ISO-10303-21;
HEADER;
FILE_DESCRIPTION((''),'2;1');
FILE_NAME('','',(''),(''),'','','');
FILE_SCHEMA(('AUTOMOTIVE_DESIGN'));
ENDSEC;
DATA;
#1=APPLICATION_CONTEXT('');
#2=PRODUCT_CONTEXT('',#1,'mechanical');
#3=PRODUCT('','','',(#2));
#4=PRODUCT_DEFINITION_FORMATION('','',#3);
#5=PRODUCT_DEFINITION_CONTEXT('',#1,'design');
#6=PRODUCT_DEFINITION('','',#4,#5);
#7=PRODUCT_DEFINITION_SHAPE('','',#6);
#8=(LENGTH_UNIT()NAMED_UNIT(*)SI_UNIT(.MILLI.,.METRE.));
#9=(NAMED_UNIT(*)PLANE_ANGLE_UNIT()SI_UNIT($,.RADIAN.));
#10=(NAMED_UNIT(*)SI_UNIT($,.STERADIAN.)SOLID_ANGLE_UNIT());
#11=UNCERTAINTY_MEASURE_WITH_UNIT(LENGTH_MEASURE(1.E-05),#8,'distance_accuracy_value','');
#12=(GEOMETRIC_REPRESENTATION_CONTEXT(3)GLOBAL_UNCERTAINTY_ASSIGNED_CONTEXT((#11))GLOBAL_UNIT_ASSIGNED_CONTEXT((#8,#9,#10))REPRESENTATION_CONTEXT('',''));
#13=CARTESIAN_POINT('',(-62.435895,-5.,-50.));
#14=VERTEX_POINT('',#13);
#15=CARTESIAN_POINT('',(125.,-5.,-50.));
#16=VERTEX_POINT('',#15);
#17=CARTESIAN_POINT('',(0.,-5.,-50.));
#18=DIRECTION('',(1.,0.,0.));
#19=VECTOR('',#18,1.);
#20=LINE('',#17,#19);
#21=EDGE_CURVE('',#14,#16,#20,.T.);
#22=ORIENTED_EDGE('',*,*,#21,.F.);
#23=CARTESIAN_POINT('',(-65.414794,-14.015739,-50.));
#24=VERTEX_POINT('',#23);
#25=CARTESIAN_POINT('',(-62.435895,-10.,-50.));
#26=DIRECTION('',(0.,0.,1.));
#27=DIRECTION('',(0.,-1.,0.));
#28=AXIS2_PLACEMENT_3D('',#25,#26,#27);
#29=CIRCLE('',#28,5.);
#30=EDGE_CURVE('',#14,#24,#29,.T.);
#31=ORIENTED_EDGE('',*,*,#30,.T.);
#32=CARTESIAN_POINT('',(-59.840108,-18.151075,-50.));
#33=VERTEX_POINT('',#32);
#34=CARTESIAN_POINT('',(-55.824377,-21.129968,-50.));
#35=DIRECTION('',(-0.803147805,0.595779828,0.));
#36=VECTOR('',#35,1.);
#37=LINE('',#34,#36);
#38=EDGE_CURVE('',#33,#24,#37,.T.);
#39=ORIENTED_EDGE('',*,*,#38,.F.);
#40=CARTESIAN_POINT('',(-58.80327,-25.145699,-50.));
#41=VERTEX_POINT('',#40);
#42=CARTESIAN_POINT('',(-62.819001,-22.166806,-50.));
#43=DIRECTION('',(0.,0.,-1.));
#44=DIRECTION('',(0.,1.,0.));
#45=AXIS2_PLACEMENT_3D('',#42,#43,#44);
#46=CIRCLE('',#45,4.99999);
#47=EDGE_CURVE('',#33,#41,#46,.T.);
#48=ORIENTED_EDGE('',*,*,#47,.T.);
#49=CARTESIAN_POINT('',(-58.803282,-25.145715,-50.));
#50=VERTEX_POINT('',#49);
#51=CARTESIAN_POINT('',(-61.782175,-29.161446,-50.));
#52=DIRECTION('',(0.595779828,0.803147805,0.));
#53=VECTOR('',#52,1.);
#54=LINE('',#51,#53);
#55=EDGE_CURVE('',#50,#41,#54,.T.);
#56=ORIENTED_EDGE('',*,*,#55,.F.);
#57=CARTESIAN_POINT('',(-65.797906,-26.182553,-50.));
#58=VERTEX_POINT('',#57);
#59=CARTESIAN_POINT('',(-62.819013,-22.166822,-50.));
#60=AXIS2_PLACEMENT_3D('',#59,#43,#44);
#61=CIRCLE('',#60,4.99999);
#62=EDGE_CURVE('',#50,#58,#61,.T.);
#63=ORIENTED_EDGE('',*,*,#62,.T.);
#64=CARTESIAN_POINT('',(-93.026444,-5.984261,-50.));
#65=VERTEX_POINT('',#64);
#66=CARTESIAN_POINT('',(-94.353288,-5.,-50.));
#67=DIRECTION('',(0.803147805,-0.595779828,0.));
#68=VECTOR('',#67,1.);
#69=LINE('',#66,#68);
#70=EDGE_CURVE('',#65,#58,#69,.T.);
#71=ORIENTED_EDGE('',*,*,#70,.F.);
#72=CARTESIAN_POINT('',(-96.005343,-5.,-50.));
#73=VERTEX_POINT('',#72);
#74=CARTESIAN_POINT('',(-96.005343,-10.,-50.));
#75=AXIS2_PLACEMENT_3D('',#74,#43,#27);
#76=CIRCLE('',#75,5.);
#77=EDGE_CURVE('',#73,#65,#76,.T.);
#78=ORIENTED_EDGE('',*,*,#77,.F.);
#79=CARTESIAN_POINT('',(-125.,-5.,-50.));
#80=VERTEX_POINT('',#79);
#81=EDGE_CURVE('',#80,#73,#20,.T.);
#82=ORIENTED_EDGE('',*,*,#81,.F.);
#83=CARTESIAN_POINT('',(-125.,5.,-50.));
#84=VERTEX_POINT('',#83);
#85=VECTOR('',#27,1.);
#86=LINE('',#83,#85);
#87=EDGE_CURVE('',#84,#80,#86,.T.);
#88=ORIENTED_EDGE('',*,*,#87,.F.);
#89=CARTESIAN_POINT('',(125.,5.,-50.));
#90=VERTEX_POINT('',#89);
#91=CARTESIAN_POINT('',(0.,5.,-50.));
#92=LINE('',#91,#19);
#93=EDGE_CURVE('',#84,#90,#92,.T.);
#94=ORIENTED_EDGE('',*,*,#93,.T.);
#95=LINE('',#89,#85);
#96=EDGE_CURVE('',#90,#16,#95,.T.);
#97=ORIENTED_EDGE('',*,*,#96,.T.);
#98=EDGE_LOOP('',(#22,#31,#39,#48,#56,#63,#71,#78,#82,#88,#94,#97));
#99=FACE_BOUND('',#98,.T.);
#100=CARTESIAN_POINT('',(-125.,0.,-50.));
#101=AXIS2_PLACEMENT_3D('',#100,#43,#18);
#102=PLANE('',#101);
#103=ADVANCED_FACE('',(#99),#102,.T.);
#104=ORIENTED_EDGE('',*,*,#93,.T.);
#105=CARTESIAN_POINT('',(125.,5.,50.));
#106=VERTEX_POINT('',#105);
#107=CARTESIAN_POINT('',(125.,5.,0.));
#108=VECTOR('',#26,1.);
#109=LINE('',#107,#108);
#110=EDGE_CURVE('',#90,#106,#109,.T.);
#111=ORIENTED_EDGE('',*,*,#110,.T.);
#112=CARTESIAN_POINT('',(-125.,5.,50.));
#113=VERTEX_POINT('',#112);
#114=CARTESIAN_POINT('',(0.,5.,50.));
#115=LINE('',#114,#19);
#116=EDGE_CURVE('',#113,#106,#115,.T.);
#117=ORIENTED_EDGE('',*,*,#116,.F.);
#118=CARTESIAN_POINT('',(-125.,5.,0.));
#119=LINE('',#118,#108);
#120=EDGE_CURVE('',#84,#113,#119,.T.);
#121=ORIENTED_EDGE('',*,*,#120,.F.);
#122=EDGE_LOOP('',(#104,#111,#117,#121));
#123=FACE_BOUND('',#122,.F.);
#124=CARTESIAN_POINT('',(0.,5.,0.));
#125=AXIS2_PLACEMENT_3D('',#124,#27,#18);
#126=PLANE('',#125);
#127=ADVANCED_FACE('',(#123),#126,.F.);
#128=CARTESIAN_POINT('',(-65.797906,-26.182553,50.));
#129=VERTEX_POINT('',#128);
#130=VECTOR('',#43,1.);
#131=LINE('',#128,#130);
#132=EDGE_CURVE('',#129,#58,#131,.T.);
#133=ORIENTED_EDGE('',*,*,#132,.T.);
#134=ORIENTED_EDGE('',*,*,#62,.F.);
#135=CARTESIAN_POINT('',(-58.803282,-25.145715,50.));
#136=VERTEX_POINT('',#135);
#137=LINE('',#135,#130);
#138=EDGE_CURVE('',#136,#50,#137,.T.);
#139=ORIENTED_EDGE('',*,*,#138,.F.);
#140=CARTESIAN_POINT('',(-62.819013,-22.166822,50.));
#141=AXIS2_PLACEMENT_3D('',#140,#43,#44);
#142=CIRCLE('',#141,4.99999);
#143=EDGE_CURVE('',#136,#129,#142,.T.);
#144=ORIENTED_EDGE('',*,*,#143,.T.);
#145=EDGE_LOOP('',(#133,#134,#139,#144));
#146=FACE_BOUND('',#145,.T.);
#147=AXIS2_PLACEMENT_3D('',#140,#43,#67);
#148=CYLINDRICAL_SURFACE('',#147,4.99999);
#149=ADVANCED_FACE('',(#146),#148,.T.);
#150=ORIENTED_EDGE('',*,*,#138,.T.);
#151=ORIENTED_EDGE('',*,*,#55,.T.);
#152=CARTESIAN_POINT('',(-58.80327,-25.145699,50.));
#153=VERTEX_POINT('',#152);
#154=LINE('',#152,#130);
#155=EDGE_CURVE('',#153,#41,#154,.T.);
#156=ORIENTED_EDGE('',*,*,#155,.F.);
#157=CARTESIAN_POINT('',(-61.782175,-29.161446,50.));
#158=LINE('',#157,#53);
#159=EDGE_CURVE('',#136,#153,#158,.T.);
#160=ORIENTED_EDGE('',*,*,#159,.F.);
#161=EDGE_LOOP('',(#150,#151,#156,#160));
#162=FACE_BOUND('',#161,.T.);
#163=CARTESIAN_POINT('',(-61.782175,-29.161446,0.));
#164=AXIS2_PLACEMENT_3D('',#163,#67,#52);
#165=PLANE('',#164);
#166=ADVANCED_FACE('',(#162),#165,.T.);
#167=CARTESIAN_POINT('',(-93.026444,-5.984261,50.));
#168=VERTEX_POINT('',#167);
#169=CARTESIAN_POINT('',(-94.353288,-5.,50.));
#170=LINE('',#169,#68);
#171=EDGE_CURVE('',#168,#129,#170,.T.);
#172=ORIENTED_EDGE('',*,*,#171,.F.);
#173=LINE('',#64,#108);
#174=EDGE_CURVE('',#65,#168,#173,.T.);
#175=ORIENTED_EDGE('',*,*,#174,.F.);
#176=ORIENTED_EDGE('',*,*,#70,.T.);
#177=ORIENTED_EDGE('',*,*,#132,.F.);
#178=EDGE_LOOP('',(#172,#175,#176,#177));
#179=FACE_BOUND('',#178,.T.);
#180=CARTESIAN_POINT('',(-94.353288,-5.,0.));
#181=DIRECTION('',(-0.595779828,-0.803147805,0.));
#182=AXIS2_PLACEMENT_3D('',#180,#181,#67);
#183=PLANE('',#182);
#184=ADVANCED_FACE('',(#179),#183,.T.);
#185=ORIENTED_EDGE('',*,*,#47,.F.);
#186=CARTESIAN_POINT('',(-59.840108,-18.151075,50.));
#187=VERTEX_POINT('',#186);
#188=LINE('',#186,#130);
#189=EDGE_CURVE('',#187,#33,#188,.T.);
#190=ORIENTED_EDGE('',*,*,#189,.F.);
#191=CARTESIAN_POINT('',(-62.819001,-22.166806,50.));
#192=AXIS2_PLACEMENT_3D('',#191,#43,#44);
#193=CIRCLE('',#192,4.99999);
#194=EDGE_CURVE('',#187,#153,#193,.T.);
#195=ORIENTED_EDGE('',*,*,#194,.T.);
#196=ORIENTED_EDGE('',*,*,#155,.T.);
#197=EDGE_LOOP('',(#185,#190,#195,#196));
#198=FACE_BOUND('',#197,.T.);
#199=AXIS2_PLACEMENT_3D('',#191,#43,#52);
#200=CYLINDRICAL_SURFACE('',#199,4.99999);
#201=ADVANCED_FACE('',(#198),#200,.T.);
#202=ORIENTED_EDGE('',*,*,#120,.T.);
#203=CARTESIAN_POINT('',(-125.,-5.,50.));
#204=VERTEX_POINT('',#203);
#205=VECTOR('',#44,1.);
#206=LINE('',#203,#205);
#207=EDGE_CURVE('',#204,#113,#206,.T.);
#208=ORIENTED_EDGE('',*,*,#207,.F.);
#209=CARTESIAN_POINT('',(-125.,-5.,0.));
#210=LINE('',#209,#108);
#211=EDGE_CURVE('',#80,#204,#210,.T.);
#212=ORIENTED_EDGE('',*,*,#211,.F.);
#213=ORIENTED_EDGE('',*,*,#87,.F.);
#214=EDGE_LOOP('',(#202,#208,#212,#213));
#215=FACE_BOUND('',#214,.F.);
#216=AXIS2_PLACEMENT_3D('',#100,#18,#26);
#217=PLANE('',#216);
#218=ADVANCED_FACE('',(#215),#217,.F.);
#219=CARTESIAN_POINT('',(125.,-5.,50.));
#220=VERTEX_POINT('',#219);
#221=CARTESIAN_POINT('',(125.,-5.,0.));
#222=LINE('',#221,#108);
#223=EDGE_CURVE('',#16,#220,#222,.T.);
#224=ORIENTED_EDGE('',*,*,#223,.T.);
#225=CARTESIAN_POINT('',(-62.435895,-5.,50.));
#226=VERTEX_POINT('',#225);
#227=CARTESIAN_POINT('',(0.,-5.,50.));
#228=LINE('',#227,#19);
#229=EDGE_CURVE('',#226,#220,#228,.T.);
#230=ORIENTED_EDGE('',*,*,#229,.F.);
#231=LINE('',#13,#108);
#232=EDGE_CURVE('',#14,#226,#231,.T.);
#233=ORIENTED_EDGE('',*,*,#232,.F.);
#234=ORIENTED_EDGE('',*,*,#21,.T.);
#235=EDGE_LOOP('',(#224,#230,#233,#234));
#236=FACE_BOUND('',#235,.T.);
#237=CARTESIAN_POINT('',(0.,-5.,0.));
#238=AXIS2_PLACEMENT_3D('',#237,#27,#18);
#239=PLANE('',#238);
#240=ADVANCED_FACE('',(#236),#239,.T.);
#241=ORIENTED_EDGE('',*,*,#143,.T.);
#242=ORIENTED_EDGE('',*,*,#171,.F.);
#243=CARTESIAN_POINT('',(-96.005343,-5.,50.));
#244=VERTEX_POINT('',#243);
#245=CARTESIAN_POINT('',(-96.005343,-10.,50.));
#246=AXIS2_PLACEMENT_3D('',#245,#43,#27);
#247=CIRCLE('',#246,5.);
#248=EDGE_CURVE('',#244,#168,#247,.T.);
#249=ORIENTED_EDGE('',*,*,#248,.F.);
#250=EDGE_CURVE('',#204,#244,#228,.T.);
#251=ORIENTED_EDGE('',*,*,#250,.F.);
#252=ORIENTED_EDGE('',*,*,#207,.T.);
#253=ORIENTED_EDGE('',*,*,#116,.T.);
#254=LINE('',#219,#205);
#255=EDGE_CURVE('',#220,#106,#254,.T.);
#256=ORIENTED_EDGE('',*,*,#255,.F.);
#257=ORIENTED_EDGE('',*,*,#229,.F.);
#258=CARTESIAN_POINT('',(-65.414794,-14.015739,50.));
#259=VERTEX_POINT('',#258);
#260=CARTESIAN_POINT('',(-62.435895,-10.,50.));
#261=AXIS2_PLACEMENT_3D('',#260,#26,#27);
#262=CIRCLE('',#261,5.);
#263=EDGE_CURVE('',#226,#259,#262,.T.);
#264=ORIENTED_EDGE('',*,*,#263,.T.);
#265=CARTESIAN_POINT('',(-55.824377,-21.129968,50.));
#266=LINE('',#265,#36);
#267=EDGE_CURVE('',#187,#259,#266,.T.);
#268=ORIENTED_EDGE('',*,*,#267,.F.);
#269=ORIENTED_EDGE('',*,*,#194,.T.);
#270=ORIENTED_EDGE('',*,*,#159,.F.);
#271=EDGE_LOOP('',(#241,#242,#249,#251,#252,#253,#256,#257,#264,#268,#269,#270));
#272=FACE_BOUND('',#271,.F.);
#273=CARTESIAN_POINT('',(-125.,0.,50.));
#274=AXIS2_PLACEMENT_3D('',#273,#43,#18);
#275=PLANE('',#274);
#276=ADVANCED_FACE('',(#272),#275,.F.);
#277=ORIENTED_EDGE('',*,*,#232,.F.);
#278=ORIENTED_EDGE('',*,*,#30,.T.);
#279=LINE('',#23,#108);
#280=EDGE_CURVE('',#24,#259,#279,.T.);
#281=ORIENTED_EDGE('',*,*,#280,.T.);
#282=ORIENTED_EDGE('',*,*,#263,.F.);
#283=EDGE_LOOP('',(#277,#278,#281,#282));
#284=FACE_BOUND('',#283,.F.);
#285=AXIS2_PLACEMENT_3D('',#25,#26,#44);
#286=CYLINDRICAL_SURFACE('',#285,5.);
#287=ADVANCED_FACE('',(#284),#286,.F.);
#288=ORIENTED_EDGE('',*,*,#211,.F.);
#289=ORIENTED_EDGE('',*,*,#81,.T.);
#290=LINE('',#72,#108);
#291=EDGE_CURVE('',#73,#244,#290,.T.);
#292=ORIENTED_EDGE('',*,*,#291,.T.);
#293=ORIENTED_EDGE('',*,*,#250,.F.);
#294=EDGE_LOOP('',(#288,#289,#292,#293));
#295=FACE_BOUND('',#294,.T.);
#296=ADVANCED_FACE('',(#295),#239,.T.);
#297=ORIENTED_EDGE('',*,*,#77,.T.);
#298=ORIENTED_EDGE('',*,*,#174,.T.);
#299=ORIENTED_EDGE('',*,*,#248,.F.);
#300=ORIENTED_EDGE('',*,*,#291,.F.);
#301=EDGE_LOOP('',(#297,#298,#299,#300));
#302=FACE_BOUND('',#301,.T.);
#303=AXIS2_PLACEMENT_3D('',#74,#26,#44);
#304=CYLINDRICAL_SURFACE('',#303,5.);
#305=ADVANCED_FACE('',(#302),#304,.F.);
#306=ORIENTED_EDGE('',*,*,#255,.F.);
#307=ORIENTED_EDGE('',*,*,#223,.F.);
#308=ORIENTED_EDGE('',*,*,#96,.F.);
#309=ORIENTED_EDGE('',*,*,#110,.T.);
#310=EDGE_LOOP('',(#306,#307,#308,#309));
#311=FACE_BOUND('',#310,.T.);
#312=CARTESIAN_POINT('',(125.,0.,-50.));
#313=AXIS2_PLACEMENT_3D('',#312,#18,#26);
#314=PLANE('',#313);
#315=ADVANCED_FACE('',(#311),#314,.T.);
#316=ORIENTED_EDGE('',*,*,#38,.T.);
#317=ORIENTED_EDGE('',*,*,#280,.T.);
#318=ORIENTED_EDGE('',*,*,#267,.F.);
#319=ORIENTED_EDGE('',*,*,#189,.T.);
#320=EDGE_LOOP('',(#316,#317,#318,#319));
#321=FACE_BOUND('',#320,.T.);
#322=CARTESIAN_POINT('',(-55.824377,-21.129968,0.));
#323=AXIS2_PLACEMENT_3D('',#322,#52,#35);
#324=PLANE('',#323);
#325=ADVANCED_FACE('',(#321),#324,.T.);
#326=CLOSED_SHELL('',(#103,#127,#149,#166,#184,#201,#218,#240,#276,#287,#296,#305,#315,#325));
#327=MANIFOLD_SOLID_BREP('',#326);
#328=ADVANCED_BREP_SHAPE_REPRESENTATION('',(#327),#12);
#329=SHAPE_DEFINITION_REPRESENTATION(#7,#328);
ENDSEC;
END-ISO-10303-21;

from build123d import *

# Parameters (mm, degrees)
F0_W     = 250
F0_H     = 100
F1_DEPTH = 5
F4_DEPTH = 50
F5_R     = 5
F6_R     = 4.99999


# Not quite as in the source:
# - two fillets or chamfers of one size are made in one step
# - a fillet or chamfer is up to 0.001 mm smaller than in the source, because OpenCascade refuses the exact size


with BuildPart() as f1:
    # F0 (on Front) → F1 (new body, symmetric)
    with BuildSketch(Plane.XZ):
        Rectangle(F0_W, F0_H)
    extrude(amount=F1_DEPTH, both=True)

    # F3 (on Top) → F4 (join, symmetric)
    with BuildSketch(Plane.XY):
        Polygon((-55.8243768029, -21.1299679096), (-77.5685643683, -5), (-94.3532884121, -5), (-61.7821750806, -29.1614459605), align=None)
    extrude(amount=F4_DEPTH, both=True)

    # F5
    f5_edges = [f1.edges().sort_by_distance(p)[0] for p in [
        (-94.353288, -5, 0),
        (-77.568564, -5, 0),
    ]]
    fillet(f5_edges, radius=F5_R)

    # F6 (radius 5 in the source; OpenCascade refuses exactly that, so slightly less here)
    f6_edges = [f1.edges().sort_by_distance(p)[0] for p in [
        (-61.782175, -29.161446, 0),
        (-55.824377, -21.129968, 0),
    ]]
    fillet(f6_edges, radius=F6_R)


solid = f1.part
